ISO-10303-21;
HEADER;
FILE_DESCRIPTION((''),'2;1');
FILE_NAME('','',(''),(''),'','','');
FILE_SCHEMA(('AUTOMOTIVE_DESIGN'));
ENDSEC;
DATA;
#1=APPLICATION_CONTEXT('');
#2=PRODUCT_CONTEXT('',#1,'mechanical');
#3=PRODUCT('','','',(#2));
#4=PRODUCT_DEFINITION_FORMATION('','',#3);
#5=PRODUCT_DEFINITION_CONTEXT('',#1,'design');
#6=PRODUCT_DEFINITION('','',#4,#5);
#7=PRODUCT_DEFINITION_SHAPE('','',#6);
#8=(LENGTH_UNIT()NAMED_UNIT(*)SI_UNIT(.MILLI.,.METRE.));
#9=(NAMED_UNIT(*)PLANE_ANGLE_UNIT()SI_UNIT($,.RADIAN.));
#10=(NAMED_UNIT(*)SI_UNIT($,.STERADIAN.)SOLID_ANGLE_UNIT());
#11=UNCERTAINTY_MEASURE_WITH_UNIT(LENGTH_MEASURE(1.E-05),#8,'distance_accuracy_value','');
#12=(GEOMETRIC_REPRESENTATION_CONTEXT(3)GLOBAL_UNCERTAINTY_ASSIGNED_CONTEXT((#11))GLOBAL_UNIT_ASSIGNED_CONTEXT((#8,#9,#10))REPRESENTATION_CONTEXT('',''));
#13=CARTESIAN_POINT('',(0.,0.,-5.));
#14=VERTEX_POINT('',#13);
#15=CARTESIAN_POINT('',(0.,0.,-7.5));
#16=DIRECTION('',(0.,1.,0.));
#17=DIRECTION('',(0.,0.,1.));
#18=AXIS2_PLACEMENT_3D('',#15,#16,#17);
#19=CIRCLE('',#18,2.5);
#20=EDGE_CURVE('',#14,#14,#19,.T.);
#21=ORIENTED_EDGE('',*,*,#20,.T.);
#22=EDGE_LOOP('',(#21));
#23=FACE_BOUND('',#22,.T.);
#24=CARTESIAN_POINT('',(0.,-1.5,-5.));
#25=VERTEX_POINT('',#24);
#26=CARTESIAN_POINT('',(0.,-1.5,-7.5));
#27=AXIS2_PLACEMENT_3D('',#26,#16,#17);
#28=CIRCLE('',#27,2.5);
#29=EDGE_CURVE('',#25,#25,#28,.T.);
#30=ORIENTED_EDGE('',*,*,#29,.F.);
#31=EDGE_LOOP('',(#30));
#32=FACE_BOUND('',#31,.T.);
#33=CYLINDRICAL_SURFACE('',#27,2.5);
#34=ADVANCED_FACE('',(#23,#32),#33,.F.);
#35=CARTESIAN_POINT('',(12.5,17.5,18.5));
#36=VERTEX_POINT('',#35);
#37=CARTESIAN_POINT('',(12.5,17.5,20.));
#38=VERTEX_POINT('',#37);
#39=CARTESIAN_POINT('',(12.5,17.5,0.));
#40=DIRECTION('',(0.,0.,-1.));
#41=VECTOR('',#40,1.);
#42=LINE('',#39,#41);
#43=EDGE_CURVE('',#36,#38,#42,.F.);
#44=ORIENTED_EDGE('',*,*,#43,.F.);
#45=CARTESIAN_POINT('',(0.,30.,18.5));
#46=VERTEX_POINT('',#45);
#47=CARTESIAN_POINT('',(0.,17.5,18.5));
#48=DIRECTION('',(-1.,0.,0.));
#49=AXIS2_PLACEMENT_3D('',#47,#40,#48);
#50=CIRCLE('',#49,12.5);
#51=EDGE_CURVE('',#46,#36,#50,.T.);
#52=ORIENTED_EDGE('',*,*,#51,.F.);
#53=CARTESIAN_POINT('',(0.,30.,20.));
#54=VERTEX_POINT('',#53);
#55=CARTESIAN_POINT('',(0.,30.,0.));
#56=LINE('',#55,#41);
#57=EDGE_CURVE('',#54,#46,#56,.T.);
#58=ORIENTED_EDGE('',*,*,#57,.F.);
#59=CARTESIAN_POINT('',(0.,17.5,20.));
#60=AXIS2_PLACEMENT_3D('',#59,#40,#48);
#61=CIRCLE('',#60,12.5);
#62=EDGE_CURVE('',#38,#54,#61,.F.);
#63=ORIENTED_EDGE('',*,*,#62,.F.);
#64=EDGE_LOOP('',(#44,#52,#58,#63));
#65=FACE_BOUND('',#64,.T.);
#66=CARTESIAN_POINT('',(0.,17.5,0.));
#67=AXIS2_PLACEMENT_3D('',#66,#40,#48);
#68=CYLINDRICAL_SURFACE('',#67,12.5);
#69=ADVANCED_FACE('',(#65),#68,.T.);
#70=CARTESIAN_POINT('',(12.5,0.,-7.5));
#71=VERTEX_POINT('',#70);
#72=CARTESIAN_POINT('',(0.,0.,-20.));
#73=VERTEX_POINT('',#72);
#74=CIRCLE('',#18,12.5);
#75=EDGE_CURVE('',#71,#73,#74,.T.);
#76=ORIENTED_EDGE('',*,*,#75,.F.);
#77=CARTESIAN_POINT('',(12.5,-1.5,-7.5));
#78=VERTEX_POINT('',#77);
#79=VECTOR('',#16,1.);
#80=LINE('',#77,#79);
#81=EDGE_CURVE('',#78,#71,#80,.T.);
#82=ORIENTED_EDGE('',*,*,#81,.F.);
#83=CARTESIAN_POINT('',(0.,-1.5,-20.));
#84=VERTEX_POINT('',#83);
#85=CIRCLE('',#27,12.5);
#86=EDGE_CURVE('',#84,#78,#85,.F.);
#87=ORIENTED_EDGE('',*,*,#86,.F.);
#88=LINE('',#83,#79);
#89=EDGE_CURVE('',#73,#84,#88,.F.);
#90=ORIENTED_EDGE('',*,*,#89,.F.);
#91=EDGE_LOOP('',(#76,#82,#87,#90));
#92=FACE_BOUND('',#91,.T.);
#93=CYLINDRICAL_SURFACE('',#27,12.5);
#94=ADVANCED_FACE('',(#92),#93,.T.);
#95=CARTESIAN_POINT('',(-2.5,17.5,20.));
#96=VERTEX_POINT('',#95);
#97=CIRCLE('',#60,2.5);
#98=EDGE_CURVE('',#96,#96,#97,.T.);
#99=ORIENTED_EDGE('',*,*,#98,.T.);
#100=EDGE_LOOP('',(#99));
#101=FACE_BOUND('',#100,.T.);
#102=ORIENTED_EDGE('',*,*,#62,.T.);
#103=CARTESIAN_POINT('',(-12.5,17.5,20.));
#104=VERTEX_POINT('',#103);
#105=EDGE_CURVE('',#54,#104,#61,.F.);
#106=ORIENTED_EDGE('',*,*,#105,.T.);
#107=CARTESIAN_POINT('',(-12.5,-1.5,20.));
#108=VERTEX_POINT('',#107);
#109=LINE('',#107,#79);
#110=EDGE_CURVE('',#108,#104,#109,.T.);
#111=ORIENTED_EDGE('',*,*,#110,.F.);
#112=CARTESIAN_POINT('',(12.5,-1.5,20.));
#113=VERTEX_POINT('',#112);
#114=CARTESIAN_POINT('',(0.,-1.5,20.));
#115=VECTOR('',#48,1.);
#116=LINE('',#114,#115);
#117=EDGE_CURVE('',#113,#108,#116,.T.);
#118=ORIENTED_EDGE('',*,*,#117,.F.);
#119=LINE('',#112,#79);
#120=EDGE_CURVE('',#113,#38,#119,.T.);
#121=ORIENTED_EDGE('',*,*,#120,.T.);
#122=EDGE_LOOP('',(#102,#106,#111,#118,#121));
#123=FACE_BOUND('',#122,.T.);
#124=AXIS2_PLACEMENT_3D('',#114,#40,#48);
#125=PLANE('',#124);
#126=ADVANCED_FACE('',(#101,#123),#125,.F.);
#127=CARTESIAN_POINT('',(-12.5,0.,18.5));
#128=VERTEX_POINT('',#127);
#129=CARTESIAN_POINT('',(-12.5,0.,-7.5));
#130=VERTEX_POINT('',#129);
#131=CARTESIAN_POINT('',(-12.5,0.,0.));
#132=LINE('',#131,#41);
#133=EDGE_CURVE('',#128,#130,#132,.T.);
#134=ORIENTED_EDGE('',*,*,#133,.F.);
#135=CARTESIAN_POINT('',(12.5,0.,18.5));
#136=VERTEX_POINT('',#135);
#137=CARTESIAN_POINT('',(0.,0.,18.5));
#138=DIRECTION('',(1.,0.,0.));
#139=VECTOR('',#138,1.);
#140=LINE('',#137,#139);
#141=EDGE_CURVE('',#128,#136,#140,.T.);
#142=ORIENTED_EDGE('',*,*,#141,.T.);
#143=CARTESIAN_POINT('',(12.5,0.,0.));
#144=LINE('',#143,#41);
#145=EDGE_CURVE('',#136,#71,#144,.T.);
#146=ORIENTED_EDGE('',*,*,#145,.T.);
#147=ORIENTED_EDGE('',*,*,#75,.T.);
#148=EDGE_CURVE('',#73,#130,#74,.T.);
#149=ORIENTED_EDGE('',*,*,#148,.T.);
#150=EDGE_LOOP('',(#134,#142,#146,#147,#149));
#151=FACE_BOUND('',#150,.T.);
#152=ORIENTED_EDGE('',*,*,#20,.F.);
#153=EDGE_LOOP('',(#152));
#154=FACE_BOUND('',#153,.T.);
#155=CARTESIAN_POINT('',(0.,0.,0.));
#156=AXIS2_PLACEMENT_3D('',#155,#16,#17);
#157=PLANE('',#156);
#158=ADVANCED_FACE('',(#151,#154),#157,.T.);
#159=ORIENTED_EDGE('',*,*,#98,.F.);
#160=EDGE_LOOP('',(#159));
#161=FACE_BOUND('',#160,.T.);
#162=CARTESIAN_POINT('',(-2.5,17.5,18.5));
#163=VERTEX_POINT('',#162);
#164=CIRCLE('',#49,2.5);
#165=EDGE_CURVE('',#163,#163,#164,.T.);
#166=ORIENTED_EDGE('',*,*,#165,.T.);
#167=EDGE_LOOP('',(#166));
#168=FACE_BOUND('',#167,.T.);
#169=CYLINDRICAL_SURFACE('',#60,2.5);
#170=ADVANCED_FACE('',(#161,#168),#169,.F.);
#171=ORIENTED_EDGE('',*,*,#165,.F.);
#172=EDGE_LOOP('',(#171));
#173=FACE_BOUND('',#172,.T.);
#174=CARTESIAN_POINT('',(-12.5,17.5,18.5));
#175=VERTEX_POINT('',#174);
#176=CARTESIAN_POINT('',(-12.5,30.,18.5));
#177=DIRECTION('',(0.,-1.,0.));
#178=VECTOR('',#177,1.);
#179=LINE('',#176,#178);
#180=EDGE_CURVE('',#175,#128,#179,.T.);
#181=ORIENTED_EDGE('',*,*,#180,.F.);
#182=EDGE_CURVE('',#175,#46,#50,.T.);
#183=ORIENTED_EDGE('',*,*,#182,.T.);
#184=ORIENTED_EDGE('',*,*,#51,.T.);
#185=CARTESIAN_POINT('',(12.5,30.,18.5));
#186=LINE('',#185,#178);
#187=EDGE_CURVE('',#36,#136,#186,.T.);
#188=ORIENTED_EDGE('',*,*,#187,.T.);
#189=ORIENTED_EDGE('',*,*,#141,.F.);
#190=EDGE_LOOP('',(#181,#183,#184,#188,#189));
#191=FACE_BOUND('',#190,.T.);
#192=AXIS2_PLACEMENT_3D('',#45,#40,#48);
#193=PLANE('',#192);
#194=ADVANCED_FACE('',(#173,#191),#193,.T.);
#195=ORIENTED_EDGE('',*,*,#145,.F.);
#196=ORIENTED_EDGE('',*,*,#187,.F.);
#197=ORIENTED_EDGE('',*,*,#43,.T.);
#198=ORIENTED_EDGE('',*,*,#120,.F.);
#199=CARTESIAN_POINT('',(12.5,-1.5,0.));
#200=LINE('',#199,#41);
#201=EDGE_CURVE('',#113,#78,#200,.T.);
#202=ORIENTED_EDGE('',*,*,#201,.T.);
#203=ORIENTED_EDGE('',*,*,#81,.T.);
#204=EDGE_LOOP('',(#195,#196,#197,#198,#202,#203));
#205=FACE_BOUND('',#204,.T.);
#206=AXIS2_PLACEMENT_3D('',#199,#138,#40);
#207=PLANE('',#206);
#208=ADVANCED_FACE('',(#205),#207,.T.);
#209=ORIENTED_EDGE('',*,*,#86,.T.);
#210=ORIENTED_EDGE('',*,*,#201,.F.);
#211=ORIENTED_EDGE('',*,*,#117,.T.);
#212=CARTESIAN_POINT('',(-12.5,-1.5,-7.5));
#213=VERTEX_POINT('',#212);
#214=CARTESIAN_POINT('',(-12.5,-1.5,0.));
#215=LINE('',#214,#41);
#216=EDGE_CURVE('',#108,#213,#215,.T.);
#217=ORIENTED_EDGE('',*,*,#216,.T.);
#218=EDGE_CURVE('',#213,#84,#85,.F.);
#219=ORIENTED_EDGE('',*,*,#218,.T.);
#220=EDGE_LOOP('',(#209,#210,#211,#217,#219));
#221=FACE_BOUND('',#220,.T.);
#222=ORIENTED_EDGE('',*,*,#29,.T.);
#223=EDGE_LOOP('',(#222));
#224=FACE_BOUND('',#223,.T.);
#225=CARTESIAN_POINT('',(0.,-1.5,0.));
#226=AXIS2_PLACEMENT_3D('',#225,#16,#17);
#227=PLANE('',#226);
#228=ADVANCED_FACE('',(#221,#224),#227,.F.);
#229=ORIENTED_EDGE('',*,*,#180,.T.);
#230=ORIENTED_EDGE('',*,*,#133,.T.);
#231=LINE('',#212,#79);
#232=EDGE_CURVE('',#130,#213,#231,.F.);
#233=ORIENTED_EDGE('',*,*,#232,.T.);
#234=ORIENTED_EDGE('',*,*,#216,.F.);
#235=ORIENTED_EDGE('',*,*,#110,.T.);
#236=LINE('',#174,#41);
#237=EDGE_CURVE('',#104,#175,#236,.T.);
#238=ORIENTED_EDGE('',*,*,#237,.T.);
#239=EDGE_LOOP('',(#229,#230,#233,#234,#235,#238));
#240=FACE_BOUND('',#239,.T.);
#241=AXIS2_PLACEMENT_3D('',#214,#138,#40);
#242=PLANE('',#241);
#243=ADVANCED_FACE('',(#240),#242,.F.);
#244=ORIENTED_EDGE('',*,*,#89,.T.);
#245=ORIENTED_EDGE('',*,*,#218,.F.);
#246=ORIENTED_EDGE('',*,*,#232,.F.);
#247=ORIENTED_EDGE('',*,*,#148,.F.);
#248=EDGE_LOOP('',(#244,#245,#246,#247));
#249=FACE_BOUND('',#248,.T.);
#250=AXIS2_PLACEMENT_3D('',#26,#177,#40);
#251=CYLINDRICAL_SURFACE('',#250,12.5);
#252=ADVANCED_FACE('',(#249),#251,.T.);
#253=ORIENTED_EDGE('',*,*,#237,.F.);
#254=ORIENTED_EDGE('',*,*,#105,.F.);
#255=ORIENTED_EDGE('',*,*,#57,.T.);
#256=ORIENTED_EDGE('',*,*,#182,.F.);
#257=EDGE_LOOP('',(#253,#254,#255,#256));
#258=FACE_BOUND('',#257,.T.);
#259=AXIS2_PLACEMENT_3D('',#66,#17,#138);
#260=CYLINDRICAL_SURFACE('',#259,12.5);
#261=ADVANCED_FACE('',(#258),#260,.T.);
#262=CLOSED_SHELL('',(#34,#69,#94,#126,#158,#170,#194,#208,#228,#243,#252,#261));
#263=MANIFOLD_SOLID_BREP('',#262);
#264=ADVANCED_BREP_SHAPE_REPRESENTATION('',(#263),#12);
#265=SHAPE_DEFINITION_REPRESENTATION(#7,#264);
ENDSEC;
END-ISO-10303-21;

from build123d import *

# Parameters (mm, degrees)
SKETCH1_W               = 25
SKETCH1_H               = 38.5
SKETCH1_H_2             = 1.5
BOSS_EXTRUDE1_DEPTH     = 1.5
SKETCH1_3_W             = 25
SKETCH1_3_H             = 1.5
BOSS_EXTRUDE2_DEPTH     = 30
FILLET1_R               = 12.5
SKETCH2_R               = 2.5
CUT_EXTRUDE1_DEPTH      = 39.160843806
CUT_EXTRUDE2_DEPTH      = 51.383529055
CUT_EXTRUDE2_DEPTH_BACK = 51.383529055
SKETCH3_R               = 2.5


with BuildPart() as part:
    # Sketch1 → Boss-Extrude1 (new body)
    with BuildSketch(Plane(origin=(0, 0, 0), x_dir=(1, 0, 0), z_dir=(0, 1, 0))):
        with Locations((0, 0.75)):
            Rectangle(SKETCH1_W, SKETCH1_H)
        with Locations((0, -19.25)):
            Rectangle(SKETCH1_W, SKETCH1_H_2)
    extrude(amount=-BOSS_EXTRUDE1_DEPTH)

    # Sketch1<3> → Boss-Extrude2 (add)
    with BuildSketch(Plane(origin=(0, 0, 0), x_dir=(1, 0, 0), z_dir=(0, 1, 0))):
        with Locations((0, -19.25)):
            Rectangle(SKETCH1_3_W, SKETCH1_3_H)
    extrude(amount=BOSS_EXTRUDE2_DEPTH)

    # Fillet1
    fillet1_edges = [part.edges().sort_by_distance(p)[0] for p in [
        (-12.5, 30, 19.25),
        (12.5, 30, 19.25),
        (-12.5, -0.75, -20),
        (12.5, -0.75, -20),
    ]]
    fillet(fillet1_edges, radius=FILLET1_R - 0.0001)  # a hair under: the kernel refuses the full size

    # Sketch2 → Cut-Extrude1 (cut, through all)
    with BuildSketch(Plane(origin=(0, 0, 0), x_dir=(1, 0, 0), z_dir=(0, 1, 0))):
        with Locations(Location((0, 7.5, 0), (0, 0, 270))):
            Circle(SKETCH2_R)
    extrude(amount=-CUT_EXTRUDE1_DEPTH, mode=Mode.SUBTRACT)

    # Sketch3 → Cut-Extrude2 (cut, two sides: drawn at the far end of the back side and taken through both)
    with BuildSketch(Plane(origin=(0, 0, 18.5), x_dir=(-1, 0, 0), z_dir=(0, 0, -1)).offset(-CUT_EXTRUDE2_DEPTH_BACK)):
        with Locations((0, 17.5)):
            Circle(SKETCH3_R)
    extrude(amount=CUT_EXTRUDE2_DEPTH + CUT_EXTRUDE2_DEPTH_BACK, mode=Mode.SUBTRACT)


solid = part.part
